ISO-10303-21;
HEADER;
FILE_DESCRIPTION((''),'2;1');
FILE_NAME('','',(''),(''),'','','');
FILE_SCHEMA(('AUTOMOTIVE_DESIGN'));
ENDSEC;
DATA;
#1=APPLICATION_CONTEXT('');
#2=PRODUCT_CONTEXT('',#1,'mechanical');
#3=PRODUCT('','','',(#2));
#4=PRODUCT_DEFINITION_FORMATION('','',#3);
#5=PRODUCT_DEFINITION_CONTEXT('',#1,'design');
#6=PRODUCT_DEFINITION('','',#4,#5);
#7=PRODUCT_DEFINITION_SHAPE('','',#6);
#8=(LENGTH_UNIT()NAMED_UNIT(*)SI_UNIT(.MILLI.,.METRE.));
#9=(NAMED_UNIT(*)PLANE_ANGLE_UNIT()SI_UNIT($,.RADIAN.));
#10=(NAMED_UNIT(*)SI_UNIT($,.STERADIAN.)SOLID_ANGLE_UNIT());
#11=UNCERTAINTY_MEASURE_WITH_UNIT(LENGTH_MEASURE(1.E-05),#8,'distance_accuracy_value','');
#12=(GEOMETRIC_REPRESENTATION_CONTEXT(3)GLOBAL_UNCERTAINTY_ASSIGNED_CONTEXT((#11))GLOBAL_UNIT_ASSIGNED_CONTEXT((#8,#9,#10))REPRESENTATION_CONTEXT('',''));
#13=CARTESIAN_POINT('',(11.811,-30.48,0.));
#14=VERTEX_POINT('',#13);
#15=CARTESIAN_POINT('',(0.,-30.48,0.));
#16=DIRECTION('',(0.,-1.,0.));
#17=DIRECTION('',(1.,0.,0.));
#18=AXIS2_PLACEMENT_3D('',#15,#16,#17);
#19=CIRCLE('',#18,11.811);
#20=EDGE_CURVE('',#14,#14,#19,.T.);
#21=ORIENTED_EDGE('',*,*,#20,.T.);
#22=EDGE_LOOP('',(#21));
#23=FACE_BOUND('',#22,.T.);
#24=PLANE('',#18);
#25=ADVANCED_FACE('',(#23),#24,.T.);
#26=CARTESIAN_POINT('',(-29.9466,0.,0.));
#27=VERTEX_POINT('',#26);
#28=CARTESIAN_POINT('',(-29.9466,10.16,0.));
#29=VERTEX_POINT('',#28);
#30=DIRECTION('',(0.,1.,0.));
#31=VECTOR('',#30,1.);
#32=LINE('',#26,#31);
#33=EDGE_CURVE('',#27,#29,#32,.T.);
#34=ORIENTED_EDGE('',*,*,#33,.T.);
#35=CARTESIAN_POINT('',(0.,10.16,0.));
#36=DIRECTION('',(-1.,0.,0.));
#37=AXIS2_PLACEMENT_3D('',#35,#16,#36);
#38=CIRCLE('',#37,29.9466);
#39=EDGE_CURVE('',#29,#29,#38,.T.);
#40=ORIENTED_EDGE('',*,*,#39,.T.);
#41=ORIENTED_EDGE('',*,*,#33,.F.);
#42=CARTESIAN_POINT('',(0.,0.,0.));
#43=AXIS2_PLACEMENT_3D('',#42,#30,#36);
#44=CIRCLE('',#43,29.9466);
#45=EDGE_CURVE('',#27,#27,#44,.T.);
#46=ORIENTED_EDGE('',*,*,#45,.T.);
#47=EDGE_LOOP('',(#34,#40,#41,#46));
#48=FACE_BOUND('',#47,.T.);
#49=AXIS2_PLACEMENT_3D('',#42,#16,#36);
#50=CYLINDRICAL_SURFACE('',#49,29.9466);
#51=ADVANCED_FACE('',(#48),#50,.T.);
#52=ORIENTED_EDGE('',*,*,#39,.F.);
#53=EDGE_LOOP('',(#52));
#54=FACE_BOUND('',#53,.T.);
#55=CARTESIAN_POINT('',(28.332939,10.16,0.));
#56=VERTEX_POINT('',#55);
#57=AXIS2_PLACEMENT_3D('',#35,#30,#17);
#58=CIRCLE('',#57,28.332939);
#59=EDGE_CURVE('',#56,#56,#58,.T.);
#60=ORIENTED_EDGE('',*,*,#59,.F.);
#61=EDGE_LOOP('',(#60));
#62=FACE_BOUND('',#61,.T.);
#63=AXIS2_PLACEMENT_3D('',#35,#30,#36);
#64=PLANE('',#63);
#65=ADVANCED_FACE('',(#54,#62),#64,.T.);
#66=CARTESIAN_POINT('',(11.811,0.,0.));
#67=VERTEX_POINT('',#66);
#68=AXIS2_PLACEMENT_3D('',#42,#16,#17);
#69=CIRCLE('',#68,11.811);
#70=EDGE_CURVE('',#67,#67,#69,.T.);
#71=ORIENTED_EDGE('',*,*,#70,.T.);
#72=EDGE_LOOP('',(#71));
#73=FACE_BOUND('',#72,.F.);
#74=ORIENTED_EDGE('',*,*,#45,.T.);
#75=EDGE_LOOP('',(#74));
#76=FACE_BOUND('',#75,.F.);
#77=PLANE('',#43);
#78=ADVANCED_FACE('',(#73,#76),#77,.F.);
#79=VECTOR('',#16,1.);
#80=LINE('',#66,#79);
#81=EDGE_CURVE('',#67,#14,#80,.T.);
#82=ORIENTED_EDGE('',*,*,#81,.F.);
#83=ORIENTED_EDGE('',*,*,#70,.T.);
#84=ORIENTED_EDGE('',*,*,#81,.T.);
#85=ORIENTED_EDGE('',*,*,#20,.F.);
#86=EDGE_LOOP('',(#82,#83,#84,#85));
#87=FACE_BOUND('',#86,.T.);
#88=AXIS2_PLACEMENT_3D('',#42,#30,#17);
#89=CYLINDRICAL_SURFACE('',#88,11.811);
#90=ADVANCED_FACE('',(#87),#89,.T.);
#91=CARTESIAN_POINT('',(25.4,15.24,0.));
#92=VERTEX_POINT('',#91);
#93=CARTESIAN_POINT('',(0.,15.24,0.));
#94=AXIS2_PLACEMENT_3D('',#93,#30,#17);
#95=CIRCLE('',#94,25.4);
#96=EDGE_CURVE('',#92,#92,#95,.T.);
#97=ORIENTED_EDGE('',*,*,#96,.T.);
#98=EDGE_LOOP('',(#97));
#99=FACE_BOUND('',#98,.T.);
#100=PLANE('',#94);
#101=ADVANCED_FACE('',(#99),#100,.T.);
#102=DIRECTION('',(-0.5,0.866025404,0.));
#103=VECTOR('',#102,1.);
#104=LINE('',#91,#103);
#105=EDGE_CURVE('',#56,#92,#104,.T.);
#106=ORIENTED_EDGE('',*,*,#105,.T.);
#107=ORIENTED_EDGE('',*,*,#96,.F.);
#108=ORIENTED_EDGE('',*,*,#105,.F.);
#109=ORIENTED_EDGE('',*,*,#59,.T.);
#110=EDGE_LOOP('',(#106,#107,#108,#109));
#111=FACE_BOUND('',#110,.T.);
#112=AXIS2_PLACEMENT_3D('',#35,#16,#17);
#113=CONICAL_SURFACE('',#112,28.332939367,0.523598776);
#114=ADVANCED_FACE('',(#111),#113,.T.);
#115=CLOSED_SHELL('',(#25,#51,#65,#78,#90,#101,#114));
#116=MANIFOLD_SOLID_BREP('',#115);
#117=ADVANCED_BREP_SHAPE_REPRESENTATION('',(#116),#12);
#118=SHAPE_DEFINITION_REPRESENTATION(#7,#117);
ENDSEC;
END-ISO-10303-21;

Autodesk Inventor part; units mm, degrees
ref_plane "YZ Plane" through (0, 0, 0) normal (1, 0, 0) x (0, 1, 0)
ref_plane "XZ Plane" through (0, 0, 0) normal (0, 1, 0) x (-1, 0, 0)
ref_plane "XY Plane" through (0, 0, 0) normal (0, 0, 1) x (1, 0, 0)
sketch "Sketch1" plane through (0, 0, 0) normal (0, 1, 0) x (-1, 0, 0)
  line L0 (0, -41.9252) -> (0, 41.9252) projected
  line L1 (-41.9252, 0) -> (41.9252, 0) projected
  circle A0 centre (0, 0) radius 29.9466
  dimension "d0" = 59.8932
extrude "Extrusion1" add sketch "Sketch1" along normal blind 10.16
sketch "Sketch2" plane through (0, 0, 0) normal (0, 0, 1) x (1, 0, 0)
  line L0 (-29.9466, 0) -> (29.9466, 0) projected
  line L1 (29.9466, 10.16) -> (-29.9466, 10.16) projected
  line L2 (-29.9466, 0) -> (0, 0)
  line L3 (0, 0) -> (0, 10.16)
  line L4 (0, 10.16) -> (-29.9466, 10.16)
  line L5 (-29.9466, 10.16) -> (-29.9466, 0)
  line L6 (-29.9466, 0) -> (-27.4066, 10.16)
  line L7 (-29.9466, 10.16) -> (-27.4066, 10.16)
  dimension "d4" = 2.54
sketch "Sketch3" plane through (0, 10.16, 0) normal (0, 1, 0) x (1, 0, 0)
  circle A0 centre (0, 0) radius 25.4
  dimension "d8" = 50.8
extrude "Extrusion2" add sketch "Sketch3" along normal blind 5.08
draft "FaceDraft1" angle -30 pull direction (0, -1, 0) faces at (25.3176, 13.5467, 2.0439) fixed edges at (-25.4, 15.24, 0)
sketch "Sketch4" plane through (0, 0, 0) normal (0, -1, 0) x (1, 0, 0)
  circle A0 centre (0, 0) radius 11.811
  dimension "d9" = 23.622
extrude "Extrusion3" add sketch "Sketch4" along normal blind 30.48
properties part number "ButtonLarge"
